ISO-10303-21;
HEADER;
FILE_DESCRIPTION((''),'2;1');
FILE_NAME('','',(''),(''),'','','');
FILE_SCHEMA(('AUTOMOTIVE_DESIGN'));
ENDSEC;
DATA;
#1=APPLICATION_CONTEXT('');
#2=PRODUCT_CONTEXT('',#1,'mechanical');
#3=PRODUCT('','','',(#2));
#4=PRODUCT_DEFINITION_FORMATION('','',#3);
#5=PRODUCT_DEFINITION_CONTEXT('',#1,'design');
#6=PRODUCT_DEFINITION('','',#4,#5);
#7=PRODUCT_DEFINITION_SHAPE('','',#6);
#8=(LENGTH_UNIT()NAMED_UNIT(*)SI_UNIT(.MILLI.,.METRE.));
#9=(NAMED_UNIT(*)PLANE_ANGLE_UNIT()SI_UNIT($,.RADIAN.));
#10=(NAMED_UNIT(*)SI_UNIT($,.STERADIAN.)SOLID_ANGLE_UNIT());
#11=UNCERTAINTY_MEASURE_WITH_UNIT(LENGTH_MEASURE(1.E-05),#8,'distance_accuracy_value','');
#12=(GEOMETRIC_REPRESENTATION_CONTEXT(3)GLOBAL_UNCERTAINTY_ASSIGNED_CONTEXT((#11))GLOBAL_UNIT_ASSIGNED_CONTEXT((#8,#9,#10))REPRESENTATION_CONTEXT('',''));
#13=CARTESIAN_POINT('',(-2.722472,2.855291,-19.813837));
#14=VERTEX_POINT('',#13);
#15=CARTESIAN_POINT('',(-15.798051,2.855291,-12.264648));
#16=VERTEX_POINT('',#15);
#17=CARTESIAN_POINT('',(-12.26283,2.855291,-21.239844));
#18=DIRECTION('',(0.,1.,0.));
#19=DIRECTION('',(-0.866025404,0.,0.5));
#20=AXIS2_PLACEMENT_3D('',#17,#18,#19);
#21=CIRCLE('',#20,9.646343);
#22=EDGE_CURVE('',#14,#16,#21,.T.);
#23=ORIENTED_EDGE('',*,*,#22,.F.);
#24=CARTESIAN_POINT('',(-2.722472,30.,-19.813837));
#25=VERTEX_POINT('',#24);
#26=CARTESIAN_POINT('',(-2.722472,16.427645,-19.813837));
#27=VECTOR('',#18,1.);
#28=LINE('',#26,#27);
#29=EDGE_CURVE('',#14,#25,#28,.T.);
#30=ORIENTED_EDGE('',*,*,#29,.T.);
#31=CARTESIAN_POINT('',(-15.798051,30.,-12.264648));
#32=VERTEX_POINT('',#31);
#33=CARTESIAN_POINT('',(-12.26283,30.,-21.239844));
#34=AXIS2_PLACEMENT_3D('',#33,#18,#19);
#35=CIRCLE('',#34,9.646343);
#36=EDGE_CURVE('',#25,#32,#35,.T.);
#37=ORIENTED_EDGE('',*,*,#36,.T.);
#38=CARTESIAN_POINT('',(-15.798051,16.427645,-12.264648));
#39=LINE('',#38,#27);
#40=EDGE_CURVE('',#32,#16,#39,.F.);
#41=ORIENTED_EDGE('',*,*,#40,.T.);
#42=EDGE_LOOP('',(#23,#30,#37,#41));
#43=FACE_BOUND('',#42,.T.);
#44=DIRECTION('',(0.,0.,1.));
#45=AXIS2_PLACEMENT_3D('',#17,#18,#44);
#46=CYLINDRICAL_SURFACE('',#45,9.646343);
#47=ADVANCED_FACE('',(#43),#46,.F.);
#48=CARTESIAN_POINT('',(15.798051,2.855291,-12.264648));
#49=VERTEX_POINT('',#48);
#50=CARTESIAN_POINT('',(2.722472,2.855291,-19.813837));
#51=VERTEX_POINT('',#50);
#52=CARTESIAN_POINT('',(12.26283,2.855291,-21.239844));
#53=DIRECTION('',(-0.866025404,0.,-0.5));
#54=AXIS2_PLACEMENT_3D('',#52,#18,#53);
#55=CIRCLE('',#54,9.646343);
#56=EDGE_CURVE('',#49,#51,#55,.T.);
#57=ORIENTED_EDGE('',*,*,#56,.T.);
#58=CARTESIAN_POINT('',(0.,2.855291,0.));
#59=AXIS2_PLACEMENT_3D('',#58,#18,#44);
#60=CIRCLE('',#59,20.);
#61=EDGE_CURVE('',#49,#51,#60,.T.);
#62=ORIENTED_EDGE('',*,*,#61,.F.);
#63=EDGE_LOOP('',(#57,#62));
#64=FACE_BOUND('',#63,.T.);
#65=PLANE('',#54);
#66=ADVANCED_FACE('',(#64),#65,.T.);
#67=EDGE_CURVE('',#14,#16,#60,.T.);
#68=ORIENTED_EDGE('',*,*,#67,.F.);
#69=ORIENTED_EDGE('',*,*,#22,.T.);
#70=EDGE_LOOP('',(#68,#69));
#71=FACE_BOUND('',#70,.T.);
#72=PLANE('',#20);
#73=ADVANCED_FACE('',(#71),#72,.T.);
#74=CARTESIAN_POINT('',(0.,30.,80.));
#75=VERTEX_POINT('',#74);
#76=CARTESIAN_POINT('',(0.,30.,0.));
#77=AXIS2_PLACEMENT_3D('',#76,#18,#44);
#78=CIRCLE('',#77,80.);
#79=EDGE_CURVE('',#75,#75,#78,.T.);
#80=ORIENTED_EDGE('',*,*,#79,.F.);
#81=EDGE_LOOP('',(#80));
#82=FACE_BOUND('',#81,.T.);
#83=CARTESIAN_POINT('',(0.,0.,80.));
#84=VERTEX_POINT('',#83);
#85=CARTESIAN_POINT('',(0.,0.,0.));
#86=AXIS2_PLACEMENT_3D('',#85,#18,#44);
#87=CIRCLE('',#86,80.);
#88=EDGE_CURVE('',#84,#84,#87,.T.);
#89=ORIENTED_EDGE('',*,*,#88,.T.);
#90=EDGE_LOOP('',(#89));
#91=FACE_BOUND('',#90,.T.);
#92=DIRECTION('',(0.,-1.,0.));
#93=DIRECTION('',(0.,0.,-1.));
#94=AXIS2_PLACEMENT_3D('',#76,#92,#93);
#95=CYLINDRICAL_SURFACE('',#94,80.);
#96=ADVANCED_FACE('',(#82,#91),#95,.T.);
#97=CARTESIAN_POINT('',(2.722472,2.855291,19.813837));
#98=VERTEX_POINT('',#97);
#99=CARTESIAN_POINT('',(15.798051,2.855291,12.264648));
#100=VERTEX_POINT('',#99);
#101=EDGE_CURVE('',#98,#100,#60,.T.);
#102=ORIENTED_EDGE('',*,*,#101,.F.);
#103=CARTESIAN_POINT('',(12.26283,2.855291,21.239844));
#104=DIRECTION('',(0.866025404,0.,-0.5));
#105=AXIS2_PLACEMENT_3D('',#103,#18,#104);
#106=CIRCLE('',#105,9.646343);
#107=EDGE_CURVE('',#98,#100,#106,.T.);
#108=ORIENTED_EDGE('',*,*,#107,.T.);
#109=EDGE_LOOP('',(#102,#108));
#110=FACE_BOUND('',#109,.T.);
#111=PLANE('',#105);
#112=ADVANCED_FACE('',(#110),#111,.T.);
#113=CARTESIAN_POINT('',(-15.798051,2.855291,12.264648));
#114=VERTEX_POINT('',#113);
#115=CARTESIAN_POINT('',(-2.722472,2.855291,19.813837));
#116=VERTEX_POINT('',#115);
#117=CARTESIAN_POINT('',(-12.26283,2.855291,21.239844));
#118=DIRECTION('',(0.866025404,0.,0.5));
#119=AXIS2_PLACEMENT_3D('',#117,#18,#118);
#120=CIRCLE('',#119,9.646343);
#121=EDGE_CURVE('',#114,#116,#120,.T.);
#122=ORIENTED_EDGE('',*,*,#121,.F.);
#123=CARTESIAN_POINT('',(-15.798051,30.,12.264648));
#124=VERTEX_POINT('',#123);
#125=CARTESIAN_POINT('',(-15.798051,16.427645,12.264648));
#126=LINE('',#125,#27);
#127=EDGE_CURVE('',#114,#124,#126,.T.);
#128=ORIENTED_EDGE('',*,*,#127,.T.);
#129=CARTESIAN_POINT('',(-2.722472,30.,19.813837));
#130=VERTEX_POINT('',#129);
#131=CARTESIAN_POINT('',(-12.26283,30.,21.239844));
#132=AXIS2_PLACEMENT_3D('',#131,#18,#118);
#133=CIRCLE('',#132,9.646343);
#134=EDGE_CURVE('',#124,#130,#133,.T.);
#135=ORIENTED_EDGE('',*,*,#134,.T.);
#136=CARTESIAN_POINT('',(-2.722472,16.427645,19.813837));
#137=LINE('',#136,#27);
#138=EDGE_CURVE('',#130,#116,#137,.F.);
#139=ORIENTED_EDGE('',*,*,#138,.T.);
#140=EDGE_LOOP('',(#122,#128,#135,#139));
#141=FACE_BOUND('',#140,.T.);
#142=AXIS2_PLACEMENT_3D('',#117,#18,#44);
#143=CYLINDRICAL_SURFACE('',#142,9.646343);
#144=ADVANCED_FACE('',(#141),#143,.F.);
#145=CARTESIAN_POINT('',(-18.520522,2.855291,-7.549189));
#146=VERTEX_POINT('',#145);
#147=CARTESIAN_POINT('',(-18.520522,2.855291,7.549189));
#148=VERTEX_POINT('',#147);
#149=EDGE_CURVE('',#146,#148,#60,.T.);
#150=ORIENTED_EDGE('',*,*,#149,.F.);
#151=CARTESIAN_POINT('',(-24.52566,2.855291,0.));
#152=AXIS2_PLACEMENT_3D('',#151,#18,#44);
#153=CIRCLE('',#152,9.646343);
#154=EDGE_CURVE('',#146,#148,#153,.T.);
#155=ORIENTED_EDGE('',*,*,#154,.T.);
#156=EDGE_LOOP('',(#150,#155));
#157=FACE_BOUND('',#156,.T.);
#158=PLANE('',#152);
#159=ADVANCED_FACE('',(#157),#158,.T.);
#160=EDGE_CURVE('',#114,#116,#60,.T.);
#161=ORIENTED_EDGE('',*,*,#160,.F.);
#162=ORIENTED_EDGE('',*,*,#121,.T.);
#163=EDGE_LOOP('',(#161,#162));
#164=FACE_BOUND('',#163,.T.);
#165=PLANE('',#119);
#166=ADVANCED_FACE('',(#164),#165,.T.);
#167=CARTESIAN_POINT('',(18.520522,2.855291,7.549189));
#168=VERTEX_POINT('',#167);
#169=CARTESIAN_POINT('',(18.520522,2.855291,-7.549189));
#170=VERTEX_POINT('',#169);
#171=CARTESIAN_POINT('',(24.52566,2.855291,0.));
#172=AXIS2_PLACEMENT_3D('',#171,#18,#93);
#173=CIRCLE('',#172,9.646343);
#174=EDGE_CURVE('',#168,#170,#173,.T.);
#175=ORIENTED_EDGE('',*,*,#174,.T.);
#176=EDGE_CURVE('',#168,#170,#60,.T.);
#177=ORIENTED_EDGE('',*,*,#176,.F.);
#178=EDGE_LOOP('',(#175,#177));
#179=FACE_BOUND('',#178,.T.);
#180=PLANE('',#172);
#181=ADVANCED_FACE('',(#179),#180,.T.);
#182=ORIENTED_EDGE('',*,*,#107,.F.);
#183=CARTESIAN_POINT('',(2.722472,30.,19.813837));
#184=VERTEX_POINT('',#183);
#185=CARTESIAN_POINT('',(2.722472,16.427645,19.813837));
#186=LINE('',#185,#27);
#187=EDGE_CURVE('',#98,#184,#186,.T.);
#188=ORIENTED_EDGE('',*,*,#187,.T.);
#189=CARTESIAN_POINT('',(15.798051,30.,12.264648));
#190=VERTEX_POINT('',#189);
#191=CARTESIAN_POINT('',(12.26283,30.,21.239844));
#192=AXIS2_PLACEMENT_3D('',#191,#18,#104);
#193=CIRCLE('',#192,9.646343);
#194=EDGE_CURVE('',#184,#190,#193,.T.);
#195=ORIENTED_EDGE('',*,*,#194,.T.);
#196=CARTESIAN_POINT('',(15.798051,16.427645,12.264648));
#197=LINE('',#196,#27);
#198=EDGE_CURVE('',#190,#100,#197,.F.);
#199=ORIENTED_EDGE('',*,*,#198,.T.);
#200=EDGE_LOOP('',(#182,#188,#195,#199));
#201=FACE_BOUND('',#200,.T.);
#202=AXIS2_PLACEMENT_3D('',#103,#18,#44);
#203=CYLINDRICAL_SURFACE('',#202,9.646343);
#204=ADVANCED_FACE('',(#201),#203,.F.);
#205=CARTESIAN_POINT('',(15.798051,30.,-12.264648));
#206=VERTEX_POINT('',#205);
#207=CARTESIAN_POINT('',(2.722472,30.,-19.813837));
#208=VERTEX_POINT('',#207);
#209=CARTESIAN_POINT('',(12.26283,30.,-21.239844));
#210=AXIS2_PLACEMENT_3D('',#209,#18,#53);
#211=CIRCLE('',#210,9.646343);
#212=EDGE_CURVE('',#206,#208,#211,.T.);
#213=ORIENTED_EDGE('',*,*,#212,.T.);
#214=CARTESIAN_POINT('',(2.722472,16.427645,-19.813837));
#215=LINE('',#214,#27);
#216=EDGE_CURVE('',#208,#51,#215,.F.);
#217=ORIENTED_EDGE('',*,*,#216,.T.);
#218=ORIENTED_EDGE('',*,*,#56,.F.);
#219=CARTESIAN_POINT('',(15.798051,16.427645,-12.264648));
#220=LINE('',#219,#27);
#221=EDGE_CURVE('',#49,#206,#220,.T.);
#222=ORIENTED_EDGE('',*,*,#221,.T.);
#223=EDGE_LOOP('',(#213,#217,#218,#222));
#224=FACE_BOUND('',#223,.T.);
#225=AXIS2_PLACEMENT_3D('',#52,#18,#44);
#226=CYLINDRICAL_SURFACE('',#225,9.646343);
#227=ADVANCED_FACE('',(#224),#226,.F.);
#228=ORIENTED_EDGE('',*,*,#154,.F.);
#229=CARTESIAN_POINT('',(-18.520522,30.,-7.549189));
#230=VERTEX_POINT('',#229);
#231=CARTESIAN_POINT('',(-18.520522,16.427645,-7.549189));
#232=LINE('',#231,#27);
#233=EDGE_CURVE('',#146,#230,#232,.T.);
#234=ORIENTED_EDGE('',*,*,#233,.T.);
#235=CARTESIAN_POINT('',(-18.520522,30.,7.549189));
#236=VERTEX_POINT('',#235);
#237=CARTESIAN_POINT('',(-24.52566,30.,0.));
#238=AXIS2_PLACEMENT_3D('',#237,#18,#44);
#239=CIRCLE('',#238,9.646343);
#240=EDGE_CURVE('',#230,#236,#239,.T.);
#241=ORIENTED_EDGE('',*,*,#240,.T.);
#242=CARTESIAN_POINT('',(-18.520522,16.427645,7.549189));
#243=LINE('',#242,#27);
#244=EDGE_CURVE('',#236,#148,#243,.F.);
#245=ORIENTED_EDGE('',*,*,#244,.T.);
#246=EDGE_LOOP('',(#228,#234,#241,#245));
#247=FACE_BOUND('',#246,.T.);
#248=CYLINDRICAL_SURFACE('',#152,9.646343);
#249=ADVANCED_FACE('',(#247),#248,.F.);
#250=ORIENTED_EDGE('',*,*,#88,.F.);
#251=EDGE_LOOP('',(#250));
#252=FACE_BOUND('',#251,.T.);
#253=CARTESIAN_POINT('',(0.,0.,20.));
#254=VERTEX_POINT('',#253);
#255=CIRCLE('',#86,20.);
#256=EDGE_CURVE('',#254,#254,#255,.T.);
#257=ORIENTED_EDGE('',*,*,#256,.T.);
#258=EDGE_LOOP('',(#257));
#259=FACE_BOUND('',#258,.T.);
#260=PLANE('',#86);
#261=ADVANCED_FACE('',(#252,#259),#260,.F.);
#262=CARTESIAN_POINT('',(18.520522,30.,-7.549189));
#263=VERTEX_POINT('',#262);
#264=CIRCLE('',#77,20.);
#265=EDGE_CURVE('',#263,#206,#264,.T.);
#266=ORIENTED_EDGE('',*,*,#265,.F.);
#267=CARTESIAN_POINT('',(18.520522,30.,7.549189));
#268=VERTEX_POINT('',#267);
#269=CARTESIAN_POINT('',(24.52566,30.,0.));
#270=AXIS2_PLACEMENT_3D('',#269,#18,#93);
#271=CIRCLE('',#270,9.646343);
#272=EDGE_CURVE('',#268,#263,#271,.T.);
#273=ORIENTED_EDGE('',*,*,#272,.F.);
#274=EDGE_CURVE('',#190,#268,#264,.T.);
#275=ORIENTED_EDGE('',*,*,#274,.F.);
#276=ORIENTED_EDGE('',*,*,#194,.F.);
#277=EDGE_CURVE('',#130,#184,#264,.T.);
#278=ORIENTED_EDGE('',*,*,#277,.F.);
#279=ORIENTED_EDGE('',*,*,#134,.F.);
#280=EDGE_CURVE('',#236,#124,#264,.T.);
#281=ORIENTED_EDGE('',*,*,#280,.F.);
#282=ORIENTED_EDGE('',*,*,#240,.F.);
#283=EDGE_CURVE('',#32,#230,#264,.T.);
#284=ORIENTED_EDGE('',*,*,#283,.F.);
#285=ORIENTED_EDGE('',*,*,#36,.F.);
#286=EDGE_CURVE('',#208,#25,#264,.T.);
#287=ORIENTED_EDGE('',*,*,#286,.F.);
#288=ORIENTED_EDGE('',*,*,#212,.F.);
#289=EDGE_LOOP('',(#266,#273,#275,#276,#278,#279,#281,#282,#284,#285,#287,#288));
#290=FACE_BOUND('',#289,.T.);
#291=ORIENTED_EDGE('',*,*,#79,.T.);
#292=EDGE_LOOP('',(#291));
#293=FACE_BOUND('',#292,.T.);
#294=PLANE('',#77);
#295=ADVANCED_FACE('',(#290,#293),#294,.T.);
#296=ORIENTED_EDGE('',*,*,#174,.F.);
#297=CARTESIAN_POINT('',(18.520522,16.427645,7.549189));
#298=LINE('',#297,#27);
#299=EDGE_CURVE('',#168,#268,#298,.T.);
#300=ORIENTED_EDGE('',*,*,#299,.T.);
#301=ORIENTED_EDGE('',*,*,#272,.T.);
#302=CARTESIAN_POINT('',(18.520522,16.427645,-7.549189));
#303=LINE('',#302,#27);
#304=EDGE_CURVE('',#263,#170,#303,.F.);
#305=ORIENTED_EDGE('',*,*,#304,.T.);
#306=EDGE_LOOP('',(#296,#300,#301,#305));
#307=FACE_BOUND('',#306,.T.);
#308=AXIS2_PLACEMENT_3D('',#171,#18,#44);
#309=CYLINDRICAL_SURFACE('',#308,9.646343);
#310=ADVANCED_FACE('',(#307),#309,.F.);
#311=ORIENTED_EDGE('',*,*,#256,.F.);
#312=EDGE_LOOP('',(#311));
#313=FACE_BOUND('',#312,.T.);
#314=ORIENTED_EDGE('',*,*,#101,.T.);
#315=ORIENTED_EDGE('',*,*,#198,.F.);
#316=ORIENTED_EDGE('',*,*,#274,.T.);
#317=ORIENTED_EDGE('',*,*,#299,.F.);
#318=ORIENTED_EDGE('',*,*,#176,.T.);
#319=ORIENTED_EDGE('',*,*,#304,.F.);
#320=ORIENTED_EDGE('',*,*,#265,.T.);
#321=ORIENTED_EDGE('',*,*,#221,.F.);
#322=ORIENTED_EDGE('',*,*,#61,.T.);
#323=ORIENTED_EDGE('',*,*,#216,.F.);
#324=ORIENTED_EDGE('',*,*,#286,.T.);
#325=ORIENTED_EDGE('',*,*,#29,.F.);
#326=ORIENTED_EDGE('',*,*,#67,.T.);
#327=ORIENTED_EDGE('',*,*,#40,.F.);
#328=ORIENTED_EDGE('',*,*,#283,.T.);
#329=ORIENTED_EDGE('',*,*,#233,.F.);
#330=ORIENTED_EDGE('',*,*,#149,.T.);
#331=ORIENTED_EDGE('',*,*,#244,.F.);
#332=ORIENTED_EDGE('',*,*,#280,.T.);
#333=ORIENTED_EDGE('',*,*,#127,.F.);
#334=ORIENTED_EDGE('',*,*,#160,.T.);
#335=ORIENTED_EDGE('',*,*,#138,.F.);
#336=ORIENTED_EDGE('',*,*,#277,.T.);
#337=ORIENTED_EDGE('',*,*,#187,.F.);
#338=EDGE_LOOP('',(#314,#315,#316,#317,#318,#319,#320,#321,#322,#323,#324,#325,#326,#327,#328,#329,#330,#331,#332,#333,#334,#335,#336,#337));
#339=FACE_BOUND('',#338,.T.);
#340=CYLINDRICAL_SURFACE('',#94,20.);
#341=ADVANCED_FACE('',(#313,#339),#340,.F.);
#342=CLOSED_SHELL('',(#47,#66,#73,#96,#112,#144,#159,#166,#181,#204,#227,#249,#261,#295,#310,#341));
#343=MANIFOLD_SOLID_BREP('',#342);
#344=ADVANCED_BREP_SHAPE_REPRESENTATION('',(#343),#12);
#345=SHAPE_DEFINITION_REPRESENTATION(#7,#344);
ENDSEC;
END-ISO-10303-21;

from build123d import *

# Parameters (mm, degrees)
SKETCH1_R           = 80
BOSS_EXTRUDE1_DEPTH = 30
SKETCH2_R           = 20
CUT_EXTRUDE1_DEPTH  = 118.046999107
SKETCH3_R           = 9.646342968
CUT_EXTRUDE2_DEPTH  = 27.144709159
CIRPATTERN1_COUNT   = 6


with BuildPart() as part:
    # Sketch1 → Boss-Extrude1 (new body)
    with BuildSketch(Plane(origin=(0, 0, 0), x_dir=(1, 0, 0), z_dir=(0, 1, 0))):
        Circle(SKETCH1_R)
    extrude(amount=BOSS_EXTRUDE1_DEPTH)

    # Sketch2 → Cut-Extrude1 (cut, through all)
    with BuildSketch(Plane(origin=(0, 0, 0), x_dir=(1, 0, 0), z_dir=(0, 1, 0))):
        Circle(SKETCH2_R)
    extrude(amount=CUT_EXTRUDE1_DEPTH, mode=Mode.SUBTRACT)

    # Sketch3 → Cut-Extrude2 (cut)
    with BuildSketch(Plane(origin=(0, 30, 0), x_dir=(1, 0, 0), z_dir=(0, 1, 0))):
        with Locations((-24.525659848, 0)):
            Circle(SKETCH3_R)
    cut_extrude2 = extrude(amount=-CUT_EXTRUDE2_DEPTH, mode=Mode.SUBTRACT)

    # CirPattern1: Cut-Extrude2 ×6 about axis
    cirpattern1_axis = Axis((0, 0, 0), (0, 1, 0))
    for i in range(1, CIRPATTERN1_COUNT):
        add(cut_extrude2.rotate(cirpattern1_axis, i * 360 / CIRPATTERN1_COUNT), mode=Mode.SUBTRACT)


solid = part.part
